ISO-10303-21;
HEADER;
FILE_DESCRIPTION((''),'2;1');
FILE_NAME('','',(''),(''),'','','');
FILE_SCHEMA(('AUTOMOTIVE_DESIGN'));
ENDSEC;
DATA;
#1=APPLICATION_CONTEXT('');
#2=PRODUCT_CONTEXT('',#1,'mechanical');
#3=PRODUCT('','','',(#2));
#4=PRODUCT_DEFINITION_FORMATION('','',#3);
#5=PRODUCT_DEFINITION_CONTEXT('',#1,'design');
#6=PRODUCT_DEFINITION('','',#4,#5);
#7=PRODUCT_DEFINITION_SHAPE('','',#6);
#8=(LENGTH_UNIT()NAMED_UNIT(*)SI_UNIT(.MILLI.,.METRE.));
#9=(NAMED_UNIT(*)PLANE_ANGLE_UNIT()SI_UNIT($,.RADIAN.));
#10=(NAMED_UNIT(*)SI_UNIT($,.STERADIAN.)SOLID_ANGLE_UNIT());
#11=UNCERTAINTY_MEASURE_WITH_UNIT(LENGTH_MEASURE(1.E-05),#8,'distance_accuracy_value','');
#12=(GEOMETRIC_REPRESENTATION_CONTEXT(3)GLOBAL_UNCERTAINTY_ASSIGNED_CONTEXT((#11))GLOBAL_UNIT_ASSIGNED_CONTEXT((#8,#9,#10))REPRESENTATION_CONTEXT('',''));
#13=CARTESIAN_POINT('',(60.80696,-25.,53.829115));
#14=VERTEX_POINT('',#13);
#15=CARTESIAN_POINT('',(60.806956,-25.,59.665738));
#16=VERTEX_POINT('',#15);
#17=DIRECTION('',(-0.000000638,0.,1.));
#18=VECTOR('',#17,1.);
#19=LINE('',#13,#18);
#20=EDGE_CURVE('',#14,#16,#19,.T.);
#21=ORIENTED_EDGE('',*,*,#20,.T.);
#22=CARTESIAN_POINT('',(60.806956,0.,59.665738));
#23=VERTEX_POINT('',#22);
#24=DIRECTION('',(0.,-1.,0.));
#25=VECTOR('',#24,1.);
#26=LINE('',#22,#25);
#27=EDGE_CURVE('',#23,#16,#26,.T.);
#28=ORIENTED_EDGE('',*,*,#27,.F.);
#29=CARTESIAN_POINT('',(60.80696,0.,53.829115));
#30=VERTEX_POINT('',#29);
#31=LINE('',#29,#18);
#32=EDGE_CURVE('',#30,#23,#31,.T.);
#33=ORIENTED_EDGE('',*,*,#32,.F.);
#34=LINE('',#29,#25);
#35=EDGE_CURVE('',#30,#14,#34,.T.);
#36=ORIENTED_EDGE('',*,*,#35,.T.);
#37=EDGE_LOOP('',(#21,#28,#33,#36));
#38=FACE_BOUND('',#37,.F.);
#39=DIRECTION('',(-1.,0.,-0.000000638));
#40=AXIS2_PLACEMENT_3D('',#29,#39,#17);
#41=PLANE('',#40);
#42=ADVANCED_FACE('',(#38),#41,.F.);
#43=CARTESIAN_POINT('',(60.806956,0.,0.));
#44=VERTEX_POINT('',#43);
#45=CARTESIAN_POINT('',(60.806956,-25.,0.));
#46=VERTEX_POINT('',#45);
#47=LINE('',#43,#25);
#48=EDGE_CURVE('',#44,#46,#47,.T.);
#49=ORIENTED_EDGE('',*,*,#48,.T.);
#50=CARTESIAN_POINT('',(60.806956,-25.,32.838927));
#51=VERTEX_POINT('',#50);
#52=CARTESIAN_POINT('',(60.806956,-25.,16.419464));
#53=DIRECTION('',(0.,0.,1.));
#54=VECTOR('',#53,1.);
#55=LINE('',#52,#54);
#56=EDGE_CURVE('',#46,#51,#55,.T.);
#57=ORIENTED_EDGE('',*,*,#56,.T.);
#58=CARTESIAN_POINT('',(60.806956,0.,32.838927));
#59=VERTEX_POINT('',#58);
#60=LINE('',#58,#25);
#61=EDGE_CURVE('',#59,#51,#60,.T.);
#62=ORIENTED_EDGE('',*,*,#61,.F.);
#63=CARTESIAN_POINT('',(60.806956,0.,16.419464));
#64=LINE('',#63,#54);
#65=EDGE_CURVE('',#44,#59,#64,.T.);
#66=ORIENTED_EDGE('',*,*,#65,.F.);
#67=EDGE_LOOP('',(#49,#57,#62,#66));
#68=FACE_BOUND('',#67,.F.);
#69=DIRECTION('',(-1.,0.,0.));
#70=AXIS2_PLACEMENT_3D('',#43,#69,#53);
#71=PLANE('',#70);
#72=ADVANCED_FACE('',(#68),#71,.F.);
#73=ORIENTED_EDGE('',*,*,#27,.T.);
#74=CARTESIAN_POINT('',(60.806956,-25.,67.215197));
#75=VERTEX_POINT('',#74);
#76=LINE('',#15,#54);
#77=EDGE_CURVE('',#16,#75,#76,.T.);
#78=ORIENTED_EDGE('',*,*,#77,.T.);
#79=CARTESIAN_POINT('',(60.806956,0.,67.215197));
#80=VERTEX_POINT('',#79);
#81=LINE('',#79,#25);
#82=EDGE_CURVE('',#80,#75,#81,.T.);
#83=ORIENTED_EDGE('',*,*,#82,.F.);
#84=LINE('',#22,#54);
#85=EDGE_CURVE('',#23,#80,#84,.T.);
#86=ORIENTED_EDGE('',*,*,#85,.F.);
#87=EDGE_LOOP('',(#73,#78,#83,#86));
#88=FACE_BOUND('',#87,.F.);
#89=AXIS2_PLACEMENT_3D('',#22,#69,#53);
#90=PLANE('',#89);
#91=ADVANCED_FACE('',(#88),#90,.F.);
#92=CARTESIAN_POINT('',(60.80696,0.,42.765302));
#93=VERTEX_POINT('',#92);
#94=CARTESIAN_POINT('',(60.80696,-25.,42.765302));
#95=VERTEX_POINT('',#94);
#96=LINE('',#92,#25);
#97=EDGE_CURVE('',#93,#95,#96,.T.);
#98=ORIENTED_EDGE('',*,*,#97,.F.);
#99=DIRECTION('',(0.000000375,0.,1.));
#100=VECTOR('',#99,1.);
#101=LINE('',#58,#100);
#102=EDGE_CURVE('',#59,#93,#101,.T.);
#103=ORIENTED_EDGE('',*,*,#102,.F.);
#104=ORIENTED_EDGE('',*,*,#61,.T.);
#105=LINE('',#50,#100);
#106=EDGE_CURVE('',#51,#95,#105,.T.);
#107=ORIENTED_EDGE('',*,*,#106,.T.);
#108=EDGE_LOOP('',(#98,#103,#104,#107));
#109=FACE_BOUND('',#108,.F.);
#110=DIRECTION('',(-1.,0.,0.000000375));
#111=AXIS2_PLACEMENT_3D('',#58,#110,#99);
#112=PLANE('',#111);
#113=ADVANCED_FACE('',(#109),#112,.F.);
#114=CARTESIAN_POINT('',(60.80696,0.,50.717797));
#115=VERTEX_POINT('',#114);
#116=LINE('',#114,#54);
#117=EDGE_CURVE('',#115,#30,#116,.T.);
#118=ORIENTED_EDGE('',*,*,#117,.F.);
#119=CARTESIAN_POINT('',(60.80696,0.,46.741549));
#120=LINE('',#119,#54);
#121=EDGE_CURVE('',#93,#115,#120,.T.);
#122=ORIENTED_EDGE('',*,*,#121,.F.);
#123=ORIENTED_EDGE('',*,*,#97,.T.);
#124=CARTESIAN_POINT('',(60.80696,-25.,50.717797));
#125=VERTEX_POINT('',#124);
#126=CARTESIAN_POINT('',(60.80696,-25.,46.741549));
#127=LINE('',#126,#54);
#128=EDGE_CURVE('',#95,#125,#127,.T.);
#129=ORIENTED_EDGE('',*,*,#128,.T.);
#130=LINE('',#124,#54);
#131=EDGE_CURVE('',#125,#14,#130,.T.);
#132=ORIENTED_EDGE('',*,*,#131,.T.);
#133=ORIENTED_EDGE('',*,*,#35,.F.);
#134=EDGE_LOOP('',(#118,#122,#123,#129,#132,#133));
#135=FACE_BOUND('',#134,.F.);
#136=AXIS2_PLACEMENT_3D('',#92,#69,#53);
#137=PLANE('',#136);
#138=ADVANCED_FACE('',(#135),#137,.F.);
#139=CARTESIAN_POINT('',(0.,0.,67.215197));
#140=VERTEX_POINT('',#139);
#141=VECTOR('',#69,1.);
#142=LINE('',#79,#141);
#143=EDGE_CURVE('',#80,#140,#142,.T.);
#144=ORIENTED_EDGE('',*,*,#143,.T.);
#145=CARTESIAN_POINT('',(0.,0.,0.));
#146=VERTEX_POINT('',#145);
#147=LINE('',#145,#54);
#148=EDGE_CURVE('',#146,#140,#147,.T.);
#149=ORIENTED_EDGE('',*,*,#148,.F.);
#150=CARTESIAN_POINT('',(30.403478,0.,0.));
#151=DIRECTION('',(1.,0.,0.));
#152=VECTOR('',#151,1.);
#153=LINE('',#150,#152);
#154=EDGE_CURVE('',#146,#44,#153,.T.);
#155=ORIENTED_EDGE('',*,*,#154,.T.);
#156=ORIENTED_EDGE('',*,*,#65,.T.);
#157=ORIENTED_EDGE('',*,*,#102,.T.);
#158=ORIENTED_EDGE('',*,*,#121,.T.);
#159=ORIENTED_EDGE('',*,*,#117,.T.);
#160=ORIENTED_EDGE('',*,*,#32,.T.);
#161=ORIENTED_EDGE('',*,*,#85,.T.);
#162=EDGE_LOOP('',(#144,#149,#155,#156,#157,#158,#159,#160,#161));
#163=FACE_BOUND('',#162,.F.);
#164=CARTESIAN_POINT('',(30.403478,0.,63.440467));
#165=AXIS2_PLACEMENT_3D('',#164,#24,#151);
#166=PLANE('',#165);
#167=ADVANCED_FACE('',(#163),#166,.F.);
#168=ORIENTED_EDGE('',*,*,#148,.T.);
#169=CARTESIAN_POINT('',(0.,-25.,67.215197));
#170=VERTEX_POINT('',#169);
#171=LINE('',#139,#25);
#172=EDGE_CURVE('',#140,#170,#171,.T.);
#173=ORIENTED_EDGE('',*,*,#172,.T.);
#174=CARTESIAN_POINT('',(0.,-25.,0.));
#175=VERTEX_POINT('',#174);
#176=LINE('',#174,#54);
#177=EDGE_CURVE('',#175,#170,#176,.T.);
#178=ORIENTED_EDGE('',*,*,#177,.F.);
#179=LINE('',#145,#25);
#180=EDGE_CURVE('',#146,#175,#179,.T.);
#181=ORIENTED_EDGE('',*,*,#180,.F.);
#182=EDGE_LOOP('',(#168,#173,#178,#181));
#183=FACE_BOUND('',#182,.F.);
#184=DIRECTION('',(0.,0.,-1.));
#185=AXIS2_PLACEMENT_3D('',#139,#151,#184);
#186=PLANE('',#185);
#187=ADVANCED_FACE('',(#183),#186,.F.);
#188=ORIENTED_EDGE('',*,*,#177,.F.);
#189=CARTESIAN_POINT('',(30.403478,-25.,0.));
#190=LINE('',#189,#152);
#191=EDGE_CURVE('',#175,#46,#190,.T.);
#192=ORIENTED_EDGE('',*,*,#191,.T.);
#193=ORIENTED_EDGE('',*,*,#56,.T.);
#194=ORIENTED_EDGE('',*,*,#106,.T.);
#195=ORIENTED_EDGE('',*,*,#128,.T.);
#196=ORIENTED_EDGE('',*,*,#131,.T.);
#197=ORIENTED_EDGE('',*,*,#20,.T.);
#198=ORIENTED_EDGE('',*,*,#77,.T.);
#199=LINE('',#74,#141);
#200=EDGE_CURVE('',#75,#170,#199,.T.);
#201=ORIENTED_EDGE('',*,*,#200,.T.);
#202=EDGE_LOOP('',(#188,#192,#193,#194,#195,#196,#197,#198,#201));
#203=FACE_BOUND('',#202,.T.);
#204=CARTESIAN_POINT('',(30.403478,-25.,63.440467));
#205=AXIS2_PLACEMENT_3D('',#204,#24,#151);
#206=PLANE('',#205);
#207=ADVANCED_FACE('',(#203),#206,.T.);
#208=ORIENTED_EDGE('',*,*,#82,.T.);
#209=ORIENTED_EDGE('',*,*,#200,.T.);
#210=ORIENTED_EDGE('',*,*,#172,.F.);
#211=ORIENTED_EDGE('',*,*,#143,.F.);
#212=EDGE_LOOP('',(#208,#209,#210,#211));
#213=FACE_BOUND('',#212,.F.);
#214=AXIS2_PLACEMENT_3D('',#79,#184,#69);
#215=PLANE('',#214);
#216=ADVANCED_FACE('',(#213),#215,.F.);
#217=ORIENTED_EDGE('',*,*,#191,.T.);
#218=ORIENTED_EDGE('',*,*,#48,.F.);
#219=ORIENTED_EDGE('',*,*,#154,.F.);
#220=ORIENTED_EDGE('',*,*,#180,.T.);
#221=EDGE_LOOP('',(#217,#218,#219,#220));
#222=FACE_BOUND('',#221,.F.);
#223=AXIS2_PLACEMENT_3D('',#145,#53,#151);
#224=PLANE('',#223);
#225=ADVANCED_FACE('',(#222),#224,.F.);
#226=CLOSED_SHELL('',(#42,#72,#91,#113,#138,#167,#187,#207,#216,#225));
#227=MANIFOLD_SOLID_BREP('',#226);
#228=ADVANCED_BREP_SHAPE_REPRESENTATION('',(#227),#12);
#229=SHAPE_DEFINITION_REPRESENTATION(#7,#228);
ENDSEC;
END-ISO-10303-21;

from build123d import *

# Parameters (mm, degrees)
F0_W     = 60.8069598675
F0_H     = 7.9524954781
F0_W_2   = 60.8069561422
F0_H_2   = 32.8389271162
F1_DEPTH = 25


# Not quite as in the source:
# - ends of sketch curves that miss each other by under 0.0002 mm in the source are joined


with BuildPart() as f1:
    # F0 (on Front) → F1 (new body)
    with BuildSketch(Plane.XZ):
        Polygon((60.8069561422, 67.2151967883), (0, 67.2151967883), (0, 62.0886087418), (0, 59.6657376736), (60.8069561422, 59.6657376736), (60.8069561422, 62.0886087418), align=None)
        Polygon((60.8069561422, 59.6657376736), (0, 59.6657376736), (0, 53.8291148841), (0, 50.7177971303), (60.8069598675, 50.7177971303), (60.8069598675, 53.8291148841), align=None)
        with Locations((30.4034799337, 46.7415493913)):
            Rectangle(F0_W, F0_H)
        Polygon((60.8069598675, 42.7653016523), (0, 42.7653016523), (0, 32.8389271162), (60.8069561422, 32.8389271162), align=None)
        with Locations((30.4034780711, 16.4194635581)):
            Rectangle(F0_W_2, F0_H_2)
    extrude(amount=F1_DEPTH)


solid = f1.part
